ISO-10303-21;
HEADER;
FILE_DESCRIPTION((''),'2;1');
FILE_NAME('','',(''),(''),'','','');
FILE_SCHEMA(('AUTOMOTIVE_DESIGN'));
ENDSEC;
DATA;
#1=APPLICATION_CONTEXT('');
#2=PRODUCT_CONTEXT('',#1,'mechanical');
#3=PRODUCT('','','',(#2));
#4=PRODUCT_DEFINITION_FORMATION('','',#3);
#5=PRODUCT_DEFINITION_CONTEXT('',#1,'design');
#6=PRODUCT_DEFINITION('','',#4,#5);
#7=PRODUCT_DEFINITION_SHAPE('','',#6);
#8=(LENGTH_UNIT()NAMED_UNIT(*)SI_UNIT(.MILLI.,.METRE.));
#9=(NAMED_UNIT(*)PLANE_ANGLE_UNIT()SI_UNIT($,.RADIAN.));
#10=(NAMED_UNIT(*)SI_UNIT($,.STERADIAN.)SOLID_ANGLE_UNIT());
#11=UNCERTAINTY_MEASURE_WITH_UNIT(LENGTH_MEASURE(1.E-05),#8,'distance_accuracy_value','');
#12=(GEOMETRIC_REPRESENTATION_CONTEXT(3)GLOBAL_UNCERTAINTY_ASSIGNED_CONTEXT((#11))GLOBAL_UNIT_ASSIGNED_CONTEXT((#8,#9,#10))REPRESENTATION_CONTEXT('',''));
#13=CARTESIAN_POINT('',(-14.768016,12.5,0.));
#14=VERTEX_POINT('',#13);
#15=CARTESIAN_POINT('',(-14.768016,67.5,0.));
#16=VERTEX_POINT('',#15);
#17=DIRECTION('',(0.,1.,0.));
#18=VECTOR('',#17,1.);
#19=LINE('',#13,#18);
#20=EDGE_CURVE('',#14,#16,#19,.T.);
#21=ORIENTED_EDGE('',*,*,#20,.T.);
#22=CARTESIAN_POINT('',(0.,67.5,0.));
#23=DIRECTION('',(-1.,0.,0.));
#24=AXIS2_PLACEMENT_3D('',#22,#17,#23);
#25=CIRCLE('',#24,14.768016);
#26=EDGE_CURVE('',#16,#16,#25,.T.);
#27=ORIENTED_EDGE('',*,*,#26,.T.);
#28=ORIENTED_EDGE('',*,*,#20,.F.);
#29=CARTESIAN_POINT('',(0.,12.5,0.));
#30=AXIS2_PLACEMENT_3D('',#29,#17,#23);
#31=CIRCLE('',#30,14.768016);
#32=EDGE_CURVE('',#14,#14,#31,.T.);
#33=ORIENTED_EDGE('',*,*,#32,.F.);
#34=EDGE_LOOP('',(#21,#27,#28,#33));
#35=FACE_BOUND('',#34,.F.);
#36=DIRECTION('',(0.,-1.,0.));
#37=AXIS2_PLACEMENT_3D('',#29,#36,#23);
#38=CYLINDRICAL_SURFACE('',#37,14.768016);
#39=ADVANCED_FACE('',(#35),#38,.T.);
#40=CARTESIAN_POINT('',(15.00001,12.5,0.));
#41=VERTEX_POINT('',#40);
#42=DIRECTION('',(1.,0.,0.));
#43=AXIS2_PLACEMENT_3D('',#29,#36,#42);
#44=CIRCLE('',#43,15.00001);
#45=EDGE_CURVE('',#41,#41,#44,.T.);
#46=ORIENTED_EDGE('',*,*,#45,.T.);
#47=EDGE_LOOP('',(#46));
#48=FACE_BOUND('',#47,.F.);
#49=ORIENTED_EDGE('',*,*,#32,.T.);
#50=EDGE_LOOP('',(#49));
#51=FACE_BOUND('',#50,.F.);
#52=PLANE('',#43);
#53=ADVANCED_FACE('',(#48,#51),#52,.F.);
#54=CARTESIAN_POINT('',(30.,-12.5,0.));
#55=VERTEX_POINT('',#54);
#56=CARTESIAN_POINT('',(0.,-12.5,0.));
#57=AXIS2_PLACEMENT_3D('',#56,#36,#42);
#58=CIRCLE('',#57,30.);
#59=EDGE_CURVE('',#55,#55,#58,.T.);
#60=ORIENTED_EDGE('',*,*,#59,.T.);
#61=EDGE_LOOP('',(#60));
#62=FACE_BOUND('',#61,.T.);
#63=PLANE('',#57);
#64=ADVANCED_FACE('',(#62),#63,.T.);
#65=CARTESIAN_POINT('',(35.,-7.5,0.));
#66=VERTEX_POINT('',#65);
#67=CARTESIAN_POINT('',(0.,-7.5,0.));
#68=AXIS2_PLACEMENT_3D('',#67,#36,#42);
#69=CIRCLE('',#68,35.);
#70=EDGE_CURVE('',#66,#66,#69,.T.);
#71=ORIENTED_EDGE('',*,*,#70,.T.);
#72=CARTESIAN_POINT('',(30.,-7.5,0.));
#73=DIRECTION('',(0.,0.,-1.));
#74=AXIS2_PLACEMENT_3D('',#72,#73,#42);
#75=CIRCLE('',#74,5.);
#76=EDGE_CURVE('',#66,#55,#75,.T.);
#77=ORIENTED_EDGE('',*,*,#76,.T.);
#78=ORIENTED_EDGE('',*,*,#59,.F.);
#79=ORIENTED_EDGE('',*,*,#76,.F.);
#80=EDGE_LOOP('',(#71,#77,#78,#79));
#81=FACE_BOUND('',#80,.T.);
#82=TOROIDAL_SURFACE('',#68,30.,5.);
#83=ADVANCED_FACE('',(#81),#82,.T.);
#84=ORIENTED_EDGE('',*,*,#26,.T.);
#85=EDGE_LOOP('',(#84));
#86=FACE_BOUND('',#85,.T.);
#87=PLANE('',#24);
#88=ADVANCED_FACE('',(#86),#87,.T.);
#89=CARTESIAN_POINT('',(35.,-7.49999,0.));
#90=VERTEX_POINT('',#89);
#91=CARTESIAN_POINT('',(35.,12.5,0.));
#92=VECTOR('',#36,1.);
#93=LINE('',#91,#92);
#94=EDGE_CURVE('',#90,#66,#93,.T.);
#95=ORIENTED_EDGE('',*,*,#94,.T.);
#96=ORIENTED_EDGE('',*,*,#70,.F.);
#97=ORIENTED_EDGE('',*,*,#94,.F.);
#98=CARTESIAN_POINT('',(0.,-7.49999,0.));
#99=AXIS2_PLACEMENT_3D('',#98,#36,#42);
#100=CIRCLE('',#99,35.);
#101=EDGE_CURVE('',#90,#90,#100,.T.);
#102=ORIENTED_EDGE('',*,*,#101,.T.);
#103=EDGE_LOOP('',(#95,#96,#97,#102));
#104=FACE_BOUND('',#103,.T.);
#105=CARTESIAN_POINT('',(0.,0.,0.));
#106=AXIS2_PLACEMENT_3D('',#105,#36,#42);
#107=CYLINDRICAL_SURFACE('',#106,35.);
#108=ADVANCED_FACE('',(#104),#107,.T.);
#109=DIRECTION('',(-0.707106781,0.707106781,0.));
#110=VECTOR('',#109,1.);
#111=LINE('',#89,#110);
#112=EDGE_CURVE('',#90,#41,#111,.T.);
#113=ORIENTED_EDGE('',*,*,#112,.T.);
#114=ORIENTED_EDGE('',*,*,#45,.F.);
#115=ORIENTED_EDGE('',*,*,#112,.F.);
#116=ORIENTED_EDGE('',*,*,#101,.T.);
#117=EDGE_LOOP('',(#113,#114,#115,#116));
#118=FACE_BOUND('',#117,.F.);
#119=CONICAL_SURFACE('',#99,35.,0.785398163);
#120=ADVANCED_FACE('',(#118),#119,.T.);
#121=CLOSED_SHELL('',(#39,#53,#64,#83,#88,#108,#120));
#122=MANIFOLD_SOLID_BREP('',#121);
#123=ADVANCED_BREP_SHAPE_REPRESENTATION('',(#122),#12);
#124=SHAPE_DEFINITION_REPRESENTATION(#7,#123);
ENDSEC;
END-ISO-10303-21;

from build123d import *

# Parameters (mm, degrees)
F0_R     = 35
F1_DEPTH = 12.5
F2_R     = 5
F3_SIZE  = 19.99999
F4_R     = 14.7680159512
F5_DEPTH = 55


# Not quite as in the source:
# - a fillet or chamfer is up to 0.001 mm smaller than in the source, because OpenCascade refuses the exact size


with BuildPart() as f1:
    # F0 (on Front) → F1 (new body, symmetric)
    with BuildSketch(Plane.XZ):
        Circle(F0_R)
    extrude(amount=F1_DEPTH, both=True)

    # F2
    f2_edges = [f1.edges().sort_by_distance(p)[0] for p in [
        (-35, -12.5, 0),
    ]]
    fillet(f2_edges, radius=F2_R)

    # F3 (size 20 in the source; OpenCascade refuses exactly that, so slightly less here)
    f3_edges = [f1.edges().sort_by_distance(p)[0] for p in [
        (-35, 12.5, 0),
    ]]
    chamfer(f3_edges, length=F3_SIZE)

    # F4 (on face) → F5 (join)
    with BuildSketch(Plane(origin=(0, 12.5, 0), x_dir=(-1, 0, 0), z_dir=(0, 1, 0))):
        Circle(F4_R)
    extrude(amount=F5_DEPTH)


solid = f1.part
